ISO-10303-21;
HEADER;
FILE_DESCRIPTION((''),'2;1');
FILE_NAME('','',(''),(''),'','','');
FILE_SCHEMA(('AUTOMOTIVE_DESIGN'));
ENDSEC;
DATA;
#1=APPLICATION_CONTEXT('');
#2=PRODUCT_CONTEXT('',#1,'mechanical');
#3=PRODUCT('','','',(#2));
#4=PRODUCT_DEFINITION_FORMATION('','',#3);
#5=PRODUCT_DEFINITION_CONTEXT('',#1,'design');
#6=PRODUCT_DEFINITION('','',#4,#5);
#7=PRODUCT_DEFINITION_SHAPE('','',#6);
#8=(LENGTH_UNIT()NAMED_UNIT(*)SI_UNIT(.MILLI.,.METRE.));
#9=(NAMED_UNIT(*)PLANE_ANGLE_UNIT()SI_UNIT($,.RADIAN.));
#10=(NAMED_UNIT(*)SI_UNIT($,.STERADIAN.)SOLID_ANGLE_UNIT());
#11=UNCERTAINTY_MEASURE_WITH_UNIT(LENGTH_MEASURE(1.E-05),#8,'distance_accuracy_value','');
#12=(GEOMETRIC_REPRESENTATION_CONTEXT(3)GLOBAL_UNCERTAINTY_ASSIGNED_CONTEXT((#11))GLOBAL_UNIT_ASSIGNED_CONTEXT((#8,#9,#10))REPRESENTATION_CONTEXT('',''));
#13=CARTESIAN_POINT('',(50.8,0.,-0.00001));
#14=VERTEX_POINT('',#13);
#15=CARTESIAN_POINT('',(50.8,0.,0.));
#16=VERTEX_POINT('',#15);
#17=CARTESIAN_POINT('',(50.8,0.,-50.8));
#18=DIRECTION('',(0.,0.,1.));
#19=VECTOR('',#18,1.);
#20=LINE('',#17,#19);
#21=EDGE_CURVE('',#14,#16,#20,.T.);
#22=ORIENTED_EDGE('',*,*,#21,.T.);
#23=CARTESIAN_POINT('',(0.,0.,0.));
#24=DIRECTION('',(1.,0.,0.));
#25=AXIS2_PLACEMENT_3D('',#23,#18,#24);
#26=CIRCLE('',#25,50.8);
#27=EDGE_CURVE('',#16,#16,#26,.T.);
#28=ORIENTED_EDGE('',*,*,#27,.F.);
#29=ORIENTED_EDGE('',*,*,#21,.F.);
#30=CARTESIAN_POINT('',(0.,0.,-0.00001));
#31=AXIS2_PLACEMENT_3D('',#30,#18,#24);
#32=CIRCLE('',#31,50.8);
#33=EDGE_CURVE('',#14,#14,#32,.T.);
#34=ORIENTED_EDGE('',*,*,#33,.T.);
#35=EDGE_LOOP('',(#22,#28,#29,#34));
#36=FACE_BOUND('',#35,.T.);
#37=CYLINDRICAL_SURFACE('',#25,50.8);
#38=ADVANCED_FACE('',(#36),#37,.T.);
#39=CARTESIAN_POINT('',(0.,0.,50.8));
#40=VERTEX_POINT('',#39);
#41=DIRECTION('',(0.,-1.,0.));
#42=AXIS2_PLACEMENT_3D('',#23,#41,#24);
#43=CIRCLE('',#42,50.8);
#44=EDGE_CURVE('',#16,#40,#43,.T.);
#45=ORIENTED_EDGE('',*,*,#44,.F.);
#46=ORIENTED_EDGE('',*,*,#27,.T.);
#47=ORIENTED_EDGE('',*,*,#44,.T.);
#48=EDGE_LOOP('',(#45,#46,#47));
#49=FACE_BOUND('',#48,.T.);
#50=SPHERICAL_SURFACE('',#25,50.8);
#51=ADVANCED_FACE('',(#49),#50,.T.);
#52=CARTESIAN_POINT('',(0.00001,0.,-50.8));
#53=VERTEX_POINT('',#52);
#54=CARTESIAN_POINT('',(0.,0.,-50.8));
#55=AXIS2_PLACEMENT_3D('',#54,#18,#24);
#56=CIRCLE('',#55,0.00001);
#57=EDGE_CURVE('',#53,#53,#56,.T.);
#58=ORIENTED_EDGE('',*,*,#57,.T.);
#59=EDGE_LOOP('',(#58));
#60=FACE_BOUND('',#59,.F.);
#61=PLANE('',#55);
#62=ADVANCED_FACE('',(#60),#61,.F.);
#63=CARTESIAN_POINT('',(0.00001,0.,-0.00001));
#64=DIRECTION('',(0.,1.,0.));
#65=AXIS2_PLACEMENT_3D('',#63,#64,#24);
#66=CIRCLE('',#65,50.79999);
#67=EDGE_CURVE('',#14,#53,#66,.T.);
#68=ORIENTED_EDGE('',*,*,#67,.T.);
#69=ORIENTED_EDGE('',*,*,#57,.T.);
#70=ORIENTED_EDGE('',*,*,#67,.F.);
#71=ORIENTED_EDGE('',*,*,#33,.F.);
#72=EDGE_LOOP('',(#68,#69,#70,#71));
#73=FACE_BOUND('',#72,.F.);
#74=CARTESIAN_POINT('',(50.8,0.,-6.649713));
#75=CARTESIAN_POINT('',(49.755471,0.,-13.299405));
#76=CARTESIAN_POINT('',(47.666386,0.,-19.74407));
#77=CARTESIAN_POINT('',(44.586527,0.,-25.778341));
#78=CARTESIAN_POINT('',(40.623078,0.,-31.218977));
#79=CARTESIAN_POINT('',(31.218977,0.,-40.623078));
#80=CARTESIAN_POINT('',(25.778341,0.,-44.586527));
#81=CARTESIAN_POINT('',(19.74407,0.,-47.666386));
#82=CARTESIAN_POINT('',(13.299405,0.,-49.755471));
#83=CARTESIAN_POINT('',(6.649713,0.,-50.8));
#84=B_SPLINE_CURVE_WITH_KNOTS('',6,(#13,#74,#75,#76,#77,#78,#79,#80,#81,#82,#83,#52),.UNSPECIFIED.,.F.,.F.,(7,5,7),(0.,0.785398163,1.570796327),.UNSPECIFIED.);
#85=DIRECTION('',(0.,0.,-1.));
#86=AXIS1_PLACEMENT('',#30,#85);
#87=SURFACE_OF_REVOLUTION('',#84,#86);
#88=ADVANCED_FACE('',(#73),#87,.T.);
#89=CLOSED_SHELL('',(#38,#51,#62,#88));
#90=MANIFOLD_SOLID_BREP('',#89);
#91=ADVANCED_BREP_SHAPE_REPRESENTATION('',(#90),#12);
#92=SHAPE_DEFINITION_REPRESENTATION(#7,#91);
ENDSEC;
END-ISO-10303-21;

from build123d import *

# Parameters (mm, degrees)
F0_R     = 50.8
F1_DEPTH = 50.8
F2_R     = 50.8
F3_R     = 50.79999


# Not quite as in the source:
# - a fillet or chamfer is up to 0.001 mm smaller than in the source, because OpenCascade refuses the exact size


with BuildPart() as f1:
    # F0 (on Top) → F1 (new body, symmetric)
    with BuildSketch(Plane.XY):
        Circle(F0_R)
    extrude(amount=F1_DEPTH, both=True)

    # F2
    f2_edges = [f1.edges().sort_by_distance(p)[0] for p in [
        (-50.8, 0, 50.8),
    ]]
    fillet(f2_edges, radius=F2_R)

    # F3 (radius 50.8 in the source; OpenCascade refuses exactly that, so slightly less here)
    f3_edges = [f1.edges().sort_by_distance(p)[0] for p in [
        (-50.8, 0, -50.8),
    ]]
    fillet(f3_edges, radius=F3_R)


solid = f1.part
